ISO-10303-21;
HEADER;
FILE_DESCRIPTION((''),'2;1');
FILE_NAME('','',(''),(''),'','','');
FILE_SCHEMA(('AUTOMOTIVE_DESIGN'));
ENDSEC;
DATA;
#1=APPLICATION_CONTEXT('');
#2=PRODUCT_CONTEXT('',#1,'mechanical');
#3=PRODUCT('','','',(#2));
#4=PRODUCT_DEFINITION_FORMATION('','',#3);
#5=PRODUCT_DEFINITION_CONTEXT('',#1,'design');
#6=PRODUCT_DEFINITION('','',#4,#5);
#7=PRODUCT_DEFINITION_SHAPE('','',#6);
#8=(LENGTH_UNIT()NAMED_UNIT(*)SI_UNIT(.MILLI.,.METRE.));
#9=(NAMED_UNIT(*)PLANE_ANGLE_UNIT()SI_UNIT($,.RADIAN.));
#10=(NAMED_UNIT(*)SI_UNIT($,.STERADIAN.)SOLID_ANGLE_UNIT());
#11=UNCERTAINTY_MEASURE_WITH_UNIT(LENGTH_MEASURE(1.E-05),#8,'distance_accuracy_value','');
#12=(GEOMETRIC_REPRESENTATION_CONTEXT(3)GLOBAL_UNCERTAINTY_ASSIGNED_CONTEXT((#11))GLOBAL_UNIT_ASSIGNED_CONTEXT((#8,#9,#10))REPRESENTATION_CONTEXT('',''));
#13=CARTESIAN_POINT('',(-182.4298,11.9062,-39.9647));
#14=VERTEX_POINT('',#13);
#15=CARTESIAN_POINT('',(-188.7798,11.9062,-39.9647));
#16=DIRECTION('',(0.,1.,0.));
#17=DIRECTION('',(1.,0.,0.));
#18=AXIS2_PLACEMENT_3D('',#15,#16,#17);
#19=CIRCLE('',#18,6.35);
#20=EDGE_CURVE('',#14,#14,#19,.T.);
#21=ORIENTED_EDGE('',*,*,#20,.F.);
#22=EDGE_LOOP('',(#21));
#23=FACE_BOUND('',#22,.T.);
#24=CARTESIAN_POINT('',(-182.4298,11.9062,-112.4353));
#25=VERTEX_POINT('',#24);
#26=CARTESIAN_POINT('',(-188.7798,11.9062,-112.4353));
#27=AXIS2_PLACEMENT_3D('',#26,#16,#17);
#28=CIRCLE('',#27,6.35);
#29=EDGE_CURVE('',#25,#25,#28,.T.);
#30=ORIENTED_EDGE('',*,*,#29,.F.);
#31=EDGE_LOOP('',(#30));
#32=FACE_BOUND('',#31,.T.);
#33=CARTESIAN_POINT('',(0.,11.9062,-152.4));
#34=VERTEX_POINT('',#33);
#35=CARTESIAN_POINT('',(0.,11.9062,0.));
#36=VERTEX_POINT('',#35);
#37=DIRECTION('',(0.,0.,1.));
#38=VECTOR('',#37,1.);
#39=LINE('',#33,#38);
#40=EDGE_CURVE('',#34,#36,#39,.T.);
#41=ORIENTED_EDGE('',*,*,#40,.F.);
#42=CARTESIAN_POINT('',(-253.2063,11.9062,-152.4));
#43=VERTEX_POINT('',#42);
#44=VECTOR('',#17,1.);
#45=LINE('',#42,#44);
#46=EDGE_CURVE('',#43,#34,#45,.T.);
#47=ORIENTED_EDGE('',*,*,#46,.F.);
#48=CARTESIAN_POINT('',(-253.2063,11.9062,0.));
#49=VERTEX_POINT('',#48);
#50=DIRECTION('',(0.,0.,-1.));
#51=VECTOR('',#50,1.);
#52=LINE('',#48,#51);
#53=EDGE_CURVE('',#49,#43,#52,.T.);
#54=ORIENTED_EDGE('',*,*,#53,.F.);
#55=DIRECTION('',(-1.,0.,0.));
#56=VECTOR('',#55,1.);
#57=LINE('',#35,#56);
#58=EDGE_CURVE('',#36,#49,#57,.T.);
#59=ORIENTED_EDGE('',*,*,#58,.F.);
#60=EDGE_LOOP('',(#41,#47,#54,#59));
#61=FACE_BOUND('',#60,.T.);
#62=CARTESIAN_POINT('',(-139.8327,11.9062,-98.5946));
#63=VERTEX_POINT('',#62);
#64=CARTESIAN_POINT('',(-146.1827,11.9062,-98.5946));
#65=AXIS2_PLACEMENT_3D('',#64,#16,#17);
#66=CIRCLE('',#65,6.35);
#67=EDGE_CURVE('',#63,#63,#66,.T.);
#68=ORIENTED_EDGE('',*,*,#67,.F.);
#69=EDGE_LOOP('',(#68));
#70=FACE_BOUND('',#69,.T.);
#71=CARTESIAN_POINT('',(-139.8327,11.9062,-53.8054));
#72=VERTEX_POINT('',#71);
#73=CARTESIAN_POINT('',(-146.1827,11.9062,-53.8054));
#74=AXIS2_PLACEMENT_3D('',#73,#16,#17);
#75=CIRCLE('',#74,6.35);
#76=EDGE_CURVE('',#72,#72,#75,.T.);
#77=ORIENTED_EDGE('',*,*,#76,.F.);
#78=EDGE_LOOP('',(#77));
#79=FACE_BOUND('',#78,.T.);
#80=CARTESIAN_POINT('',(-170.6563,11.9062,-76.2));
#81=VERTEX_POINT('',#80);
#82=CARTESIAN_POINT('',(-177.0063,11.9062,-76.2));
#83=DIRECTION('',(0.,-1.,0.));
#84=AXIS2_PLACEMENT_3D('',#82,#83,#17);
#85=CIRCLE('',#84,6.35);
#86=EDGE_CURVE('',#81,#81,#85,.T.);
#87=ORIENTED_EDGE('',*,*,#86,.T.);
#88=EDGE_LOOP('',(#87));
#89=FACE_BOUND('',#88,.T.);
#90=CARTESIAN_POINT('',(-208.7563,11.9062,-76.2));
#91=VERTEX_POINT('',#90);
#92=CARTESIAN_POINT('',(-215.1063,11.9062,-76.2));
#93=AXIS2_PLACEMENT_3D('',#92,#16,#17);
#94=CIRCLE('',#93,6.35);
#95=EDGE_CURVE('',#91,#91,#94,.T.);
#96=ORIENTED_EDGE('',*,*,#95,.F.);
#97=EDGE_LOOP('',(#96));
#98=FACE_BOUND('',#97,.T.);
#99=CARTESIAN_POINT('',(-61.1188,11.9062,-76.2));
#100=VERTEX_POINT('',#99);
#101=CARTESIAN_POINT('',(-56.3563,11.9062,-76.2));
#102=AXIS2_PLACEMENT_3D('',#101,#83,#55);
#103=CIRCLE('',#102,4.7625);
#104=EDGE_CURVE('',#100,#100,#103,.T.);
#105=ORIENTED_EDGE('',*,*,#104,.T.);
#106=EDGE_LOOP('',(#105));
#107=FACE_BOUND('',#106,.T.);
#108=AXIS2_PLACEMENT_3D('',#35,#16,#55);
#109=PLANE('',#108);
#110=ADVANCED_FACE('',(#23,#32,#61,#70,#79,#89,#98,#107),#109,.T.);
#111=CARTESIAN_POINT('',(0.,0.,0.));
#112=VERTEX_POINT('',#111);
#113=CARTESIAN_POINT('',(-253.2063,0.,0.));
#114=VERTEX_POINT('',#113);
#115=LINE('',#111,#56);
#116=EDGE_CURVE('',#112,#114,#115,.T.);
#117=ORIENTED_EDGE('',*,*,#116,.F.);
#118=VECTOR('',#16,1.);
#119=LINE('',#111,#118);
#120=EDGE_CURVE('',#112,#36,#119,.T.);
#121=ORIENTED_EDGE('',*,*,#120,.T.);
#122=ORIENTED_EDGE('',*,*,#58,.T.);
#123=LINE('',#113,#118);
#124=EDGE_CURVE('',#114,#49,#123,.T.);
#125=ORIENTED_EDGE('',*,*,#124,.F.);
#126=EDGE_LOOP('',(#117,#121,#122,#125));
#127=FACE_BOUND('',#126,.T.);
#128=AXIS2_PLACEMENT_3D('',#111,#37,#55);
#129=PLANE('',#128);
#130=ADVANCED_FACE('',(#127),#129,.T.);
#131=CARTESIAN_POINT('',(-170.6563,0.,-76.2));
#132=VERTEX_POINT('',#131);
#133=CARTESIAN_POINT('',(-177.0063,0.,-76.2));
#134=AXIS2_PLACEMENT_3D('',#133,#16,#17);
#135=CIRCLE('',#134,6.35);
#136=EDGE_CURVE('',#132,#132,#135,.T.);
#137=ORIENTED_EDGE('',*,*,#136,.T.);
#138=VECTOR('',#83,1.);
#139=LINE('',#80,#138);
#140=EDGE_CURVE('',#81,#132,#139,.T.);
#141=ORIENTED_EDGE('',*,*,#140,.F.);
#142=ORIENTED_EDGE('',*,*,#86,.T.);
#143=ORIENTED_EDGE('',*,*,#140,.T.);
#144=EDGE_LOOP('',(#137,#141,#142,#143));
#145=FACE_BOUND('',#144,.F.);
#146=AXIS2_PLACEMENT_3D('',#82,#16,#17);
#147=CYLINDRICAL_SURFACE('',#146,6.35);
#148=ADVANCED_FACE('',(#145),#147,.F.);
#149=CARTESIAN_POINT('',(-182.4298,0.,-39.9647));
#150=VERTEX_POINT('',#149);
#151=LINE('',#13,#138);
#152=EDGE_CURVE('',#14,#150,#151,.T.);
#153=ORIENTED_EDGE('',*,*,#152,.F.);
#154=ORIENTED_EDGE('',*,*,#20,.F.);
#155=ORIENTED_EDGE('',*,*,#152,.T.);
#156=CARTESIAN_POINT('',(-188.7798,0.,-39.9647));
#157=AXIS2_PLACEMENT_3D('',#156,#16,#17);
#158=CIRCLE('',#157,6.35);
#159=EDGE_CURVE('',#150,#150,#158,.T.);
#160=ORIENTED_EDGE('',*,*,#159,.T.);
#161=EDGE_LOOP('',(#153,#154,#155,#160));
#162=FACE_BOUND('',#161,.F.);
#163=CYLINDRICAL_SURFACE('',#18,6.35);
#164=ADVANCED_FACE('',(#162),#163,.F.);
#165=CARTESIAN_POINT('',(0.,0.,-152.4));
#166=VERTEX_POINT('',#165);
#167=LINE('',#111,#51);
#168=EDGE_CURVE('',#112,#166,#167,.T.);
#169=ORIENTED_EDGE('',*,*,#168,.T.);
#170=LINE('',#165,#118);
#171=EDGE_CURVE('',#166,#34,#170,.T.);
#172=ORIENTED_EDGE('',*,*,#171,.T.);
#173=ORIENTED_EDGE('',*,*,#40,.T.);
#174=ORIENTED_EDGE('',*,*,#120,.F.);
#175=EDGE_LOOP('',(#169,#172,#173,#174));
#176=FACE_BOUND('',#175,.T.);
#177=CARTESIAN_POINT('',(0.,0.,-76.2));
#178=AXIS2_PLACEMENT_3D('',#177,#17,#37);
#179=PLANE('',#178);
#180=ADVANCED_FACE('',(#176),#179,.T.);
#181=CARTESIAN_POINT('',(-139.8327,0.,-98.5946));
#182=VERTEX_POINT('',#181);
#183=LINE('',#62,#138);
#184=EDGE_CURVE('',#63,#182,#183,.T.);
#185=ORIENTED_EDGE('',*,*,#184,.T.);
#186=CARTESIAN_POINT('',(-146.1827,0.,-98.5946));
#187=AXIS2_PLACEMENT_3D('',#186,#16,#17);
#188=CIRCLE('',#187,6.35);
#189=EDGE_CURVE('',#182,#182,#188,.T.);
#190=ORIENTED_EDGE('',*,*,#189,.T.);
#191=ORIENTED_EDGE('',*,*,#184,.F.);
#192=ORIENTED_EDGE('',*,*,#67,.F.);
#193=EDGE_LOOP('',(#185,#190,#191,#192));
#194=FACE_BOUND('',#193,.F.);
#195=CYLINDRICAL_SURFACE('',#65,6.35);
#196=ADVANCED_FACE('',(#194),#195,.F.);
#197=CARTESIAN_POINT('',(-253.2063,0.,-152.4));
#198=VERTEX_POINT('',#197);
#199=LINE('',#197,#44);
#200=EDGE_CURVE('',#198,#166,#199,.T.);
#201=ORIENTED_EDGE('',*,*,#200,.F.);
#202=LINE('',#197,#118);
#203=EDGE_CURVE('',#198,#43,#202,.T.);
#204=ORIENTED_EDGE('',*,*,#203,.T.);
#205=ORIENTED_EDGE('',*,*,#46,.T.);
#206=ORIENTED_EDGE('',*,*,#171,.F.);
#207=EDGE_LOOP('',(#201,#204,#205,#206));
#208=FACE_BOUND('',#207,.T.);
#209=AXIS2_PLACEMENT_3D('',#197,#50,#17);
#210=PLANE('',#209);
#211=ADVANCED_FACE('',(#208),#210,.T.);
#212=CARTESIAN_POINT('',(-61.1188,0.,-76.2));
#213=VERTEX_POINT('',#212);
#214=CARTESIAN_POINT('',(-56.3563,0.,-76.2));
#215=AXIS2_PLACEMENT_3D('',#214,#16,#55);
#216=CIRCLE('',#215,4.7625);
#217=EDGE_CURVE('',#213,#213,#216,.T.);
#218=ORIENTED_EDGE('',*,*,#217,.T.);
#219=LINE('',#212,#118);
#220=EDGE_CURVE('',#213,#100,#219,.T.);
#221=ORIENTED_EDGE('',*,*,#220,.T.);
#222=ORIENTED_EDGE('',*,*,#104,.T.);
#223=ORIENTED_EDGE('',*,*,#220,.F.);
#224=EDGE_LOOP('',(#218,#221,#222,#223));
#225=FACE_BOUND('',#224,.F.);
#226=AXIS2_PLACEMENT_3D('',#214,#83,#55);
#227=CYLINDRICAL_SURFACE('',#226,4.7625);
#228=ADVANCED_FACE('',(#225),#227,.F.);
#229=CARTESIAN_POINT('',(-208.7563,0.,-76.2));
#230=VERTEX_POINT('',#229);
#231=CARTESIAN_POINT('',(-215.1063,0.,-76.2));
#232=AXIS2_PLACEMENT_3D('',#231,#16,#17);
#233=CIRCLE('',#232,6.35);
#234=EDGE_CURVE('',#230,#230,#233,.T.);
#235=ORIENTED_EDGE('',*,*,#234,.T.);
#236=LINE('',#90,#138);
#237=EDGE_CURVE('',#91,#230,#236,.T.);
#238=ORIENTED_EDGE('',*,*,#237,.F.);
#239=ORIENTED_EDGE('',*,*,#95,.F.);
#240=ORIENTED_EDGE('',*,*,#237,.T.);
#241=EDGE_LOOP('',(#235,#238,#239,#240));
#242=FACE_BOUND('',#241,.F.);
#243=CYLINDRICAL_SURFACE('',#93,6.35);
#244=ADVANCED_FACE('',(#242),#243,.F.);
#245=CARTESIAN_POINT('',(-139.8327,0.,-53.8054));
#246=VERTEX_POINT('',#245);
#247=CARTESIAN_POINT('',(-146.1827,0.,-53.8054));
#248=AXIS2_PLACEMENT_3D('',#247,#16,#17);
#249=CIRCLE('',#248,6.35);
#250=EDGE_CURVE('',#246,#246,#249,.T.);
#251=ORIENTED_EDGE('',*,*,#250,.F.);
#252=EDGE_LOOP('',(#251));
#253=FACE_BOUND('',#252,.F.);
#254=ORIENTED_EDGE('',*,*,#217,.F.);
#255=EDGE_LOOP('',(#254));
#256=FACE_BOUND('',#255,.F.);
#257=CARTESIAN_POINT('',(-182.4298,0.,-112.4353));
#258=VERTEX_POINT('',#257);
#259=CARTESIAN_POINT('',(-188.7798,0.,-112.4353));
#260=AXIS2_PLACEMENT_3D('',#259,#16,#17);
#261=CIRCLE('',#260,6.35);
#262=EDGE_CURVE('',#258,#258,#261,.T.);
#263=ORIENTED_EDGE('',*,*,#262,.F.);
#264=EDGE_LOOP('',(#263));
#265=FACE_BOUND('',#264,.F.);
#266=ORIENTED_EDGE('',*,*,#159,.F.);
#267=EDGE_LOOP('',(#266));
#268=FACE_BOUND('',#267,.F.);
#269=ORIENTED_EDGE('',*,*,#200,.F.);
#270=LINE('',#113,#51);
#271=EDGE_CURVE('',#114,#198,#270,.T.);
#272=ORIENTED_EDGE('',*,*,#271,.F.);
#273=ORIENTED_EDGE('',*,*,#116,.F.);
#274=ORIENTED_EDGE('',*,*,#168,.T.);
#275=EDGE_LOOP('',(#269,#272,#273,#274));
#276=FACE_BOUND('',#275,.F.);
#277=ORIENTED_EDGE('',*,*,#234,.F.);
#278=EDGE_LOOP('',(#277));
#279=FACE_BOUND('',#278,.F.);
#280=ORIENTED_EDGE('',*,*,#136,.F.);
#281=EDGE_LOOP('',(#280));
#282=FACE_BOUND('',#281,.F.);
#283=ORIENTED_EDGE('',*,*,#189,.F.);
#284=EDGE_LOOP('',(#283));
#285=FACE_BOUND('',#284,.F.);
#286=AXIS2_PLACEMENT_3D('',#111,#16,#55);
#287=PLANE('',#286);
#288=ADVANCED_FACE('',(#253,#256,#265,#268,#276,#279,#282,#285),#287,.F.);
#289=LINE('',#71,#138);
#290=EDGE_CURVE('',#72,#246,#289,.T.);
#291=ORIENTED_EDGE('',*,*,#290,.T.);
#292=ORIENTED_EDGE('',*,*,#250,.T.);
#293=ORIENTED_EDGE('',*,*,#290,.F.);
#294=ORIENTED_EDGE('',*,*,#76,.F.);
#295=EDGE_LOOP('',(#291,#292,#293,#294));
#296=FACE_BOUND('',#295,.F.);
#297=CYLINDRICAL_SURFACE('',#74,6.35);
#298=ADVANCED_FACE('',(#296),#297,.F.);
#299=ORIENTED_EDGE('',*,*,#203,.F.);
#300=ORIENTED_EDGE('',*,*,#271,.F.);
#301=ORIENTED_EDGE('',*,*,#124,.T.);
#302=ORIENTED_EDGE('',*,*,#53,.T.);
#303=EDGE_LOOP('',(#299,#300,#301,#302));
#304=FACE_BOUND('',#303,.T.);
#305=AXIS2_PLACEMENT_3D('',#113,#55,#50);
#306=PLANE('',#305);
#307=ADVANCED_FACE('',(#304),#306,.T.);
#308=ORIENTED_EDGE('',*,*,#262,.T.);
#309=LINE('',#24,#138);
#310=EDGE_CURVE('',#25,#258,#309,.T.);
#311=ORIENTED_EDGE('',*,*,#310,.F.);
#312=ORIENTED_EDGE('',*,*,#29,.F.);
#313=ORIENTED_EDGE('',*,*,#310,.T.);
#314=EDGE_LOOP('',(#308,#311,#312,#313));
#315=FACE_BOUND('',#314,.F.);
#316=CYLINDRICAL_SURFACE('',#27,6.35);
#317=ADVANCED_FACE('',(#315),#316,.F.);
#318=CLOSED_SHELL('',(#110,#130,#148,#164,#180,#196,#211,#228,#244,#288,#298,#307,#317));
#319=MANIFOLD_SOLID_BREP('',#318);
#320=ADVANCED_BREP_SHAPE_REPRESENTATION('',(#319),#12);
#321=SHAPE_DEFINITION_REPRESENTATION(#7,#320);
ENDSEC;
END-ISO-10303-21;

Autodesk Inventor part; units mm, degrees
ref_plane "YZ Plane" through (0, 0, 0) normal (1, 0, 0) x (0, 1, 0)
ref_plane "XZ Plane" through (0, 0, 0) normal (0, 1, 0) x (-1, 0, 0)
ref_plane "XY Plane" through (0, 0, 0) normal (0, 0, 1) x (1, 0, 0)
sketch "Sketch1" plane through (0, 0, 0) normal (0, 1, 0) x (-1, 0, 0)
  line L0 (0, 0) -> (253.2063, 0)
  line L1 (253.2063, 0) -> (253.2063, -152.4)
  line L2 (253.2063, -152.4) -> (0, -152.4)
  line L3 (0, -152.4) -> (0, 0)
  line L4 (0, -76.2) -> (56.3563, -76.2)
  circle A0 centre (56.3563, -76.2) radius 4.7625
  dimension "d0" = 152.4
  dimension "d1" = 253.2063
  dimension "d2" = 56.3563
  dimension "d3" = 9.525
extrude "Extrusion1" add sketch "Sketch1" along normal blind 11.9062
sketch "Sketch2" plane through (0, 11.9062, 0) normal (0, 1, 0) x (1, 0, 0)
  line L0 (0, 0) -> (0, 152.4) projected
  line L1 (0, 76.2) -> (-177.0063, 76.2)
  circle A0 centre (-177.0063, 76.2) radius 6.35
  line L2 (-177.0063, 76.2) -> (-215.1063, 76.2)
  circle A1 centre (-215.1063, 76.2) radius 6.35
  circle A2 centre (-188.7798, 39.9647) radius 6.35
  circle A3 centre (-146.1827, 53.8054) radius 6.35
  circle A4 centre (-146.1827, 98.5946) radius 6.35
  circle A5 centre (-188.7798, 112.4353) radius 6.35
  dimension "d6" = 12.7
  dimension "d7" = 38.1
  dimension "d8" = 12.7
  dimension "d11" = 360
  dimension "d13" = 177.0062
extrude "Extrusion2" cut sketch "Sketch2" against normal blind 11.9062
properties part number "Stage3Wall" material "Wood (Birch)"
